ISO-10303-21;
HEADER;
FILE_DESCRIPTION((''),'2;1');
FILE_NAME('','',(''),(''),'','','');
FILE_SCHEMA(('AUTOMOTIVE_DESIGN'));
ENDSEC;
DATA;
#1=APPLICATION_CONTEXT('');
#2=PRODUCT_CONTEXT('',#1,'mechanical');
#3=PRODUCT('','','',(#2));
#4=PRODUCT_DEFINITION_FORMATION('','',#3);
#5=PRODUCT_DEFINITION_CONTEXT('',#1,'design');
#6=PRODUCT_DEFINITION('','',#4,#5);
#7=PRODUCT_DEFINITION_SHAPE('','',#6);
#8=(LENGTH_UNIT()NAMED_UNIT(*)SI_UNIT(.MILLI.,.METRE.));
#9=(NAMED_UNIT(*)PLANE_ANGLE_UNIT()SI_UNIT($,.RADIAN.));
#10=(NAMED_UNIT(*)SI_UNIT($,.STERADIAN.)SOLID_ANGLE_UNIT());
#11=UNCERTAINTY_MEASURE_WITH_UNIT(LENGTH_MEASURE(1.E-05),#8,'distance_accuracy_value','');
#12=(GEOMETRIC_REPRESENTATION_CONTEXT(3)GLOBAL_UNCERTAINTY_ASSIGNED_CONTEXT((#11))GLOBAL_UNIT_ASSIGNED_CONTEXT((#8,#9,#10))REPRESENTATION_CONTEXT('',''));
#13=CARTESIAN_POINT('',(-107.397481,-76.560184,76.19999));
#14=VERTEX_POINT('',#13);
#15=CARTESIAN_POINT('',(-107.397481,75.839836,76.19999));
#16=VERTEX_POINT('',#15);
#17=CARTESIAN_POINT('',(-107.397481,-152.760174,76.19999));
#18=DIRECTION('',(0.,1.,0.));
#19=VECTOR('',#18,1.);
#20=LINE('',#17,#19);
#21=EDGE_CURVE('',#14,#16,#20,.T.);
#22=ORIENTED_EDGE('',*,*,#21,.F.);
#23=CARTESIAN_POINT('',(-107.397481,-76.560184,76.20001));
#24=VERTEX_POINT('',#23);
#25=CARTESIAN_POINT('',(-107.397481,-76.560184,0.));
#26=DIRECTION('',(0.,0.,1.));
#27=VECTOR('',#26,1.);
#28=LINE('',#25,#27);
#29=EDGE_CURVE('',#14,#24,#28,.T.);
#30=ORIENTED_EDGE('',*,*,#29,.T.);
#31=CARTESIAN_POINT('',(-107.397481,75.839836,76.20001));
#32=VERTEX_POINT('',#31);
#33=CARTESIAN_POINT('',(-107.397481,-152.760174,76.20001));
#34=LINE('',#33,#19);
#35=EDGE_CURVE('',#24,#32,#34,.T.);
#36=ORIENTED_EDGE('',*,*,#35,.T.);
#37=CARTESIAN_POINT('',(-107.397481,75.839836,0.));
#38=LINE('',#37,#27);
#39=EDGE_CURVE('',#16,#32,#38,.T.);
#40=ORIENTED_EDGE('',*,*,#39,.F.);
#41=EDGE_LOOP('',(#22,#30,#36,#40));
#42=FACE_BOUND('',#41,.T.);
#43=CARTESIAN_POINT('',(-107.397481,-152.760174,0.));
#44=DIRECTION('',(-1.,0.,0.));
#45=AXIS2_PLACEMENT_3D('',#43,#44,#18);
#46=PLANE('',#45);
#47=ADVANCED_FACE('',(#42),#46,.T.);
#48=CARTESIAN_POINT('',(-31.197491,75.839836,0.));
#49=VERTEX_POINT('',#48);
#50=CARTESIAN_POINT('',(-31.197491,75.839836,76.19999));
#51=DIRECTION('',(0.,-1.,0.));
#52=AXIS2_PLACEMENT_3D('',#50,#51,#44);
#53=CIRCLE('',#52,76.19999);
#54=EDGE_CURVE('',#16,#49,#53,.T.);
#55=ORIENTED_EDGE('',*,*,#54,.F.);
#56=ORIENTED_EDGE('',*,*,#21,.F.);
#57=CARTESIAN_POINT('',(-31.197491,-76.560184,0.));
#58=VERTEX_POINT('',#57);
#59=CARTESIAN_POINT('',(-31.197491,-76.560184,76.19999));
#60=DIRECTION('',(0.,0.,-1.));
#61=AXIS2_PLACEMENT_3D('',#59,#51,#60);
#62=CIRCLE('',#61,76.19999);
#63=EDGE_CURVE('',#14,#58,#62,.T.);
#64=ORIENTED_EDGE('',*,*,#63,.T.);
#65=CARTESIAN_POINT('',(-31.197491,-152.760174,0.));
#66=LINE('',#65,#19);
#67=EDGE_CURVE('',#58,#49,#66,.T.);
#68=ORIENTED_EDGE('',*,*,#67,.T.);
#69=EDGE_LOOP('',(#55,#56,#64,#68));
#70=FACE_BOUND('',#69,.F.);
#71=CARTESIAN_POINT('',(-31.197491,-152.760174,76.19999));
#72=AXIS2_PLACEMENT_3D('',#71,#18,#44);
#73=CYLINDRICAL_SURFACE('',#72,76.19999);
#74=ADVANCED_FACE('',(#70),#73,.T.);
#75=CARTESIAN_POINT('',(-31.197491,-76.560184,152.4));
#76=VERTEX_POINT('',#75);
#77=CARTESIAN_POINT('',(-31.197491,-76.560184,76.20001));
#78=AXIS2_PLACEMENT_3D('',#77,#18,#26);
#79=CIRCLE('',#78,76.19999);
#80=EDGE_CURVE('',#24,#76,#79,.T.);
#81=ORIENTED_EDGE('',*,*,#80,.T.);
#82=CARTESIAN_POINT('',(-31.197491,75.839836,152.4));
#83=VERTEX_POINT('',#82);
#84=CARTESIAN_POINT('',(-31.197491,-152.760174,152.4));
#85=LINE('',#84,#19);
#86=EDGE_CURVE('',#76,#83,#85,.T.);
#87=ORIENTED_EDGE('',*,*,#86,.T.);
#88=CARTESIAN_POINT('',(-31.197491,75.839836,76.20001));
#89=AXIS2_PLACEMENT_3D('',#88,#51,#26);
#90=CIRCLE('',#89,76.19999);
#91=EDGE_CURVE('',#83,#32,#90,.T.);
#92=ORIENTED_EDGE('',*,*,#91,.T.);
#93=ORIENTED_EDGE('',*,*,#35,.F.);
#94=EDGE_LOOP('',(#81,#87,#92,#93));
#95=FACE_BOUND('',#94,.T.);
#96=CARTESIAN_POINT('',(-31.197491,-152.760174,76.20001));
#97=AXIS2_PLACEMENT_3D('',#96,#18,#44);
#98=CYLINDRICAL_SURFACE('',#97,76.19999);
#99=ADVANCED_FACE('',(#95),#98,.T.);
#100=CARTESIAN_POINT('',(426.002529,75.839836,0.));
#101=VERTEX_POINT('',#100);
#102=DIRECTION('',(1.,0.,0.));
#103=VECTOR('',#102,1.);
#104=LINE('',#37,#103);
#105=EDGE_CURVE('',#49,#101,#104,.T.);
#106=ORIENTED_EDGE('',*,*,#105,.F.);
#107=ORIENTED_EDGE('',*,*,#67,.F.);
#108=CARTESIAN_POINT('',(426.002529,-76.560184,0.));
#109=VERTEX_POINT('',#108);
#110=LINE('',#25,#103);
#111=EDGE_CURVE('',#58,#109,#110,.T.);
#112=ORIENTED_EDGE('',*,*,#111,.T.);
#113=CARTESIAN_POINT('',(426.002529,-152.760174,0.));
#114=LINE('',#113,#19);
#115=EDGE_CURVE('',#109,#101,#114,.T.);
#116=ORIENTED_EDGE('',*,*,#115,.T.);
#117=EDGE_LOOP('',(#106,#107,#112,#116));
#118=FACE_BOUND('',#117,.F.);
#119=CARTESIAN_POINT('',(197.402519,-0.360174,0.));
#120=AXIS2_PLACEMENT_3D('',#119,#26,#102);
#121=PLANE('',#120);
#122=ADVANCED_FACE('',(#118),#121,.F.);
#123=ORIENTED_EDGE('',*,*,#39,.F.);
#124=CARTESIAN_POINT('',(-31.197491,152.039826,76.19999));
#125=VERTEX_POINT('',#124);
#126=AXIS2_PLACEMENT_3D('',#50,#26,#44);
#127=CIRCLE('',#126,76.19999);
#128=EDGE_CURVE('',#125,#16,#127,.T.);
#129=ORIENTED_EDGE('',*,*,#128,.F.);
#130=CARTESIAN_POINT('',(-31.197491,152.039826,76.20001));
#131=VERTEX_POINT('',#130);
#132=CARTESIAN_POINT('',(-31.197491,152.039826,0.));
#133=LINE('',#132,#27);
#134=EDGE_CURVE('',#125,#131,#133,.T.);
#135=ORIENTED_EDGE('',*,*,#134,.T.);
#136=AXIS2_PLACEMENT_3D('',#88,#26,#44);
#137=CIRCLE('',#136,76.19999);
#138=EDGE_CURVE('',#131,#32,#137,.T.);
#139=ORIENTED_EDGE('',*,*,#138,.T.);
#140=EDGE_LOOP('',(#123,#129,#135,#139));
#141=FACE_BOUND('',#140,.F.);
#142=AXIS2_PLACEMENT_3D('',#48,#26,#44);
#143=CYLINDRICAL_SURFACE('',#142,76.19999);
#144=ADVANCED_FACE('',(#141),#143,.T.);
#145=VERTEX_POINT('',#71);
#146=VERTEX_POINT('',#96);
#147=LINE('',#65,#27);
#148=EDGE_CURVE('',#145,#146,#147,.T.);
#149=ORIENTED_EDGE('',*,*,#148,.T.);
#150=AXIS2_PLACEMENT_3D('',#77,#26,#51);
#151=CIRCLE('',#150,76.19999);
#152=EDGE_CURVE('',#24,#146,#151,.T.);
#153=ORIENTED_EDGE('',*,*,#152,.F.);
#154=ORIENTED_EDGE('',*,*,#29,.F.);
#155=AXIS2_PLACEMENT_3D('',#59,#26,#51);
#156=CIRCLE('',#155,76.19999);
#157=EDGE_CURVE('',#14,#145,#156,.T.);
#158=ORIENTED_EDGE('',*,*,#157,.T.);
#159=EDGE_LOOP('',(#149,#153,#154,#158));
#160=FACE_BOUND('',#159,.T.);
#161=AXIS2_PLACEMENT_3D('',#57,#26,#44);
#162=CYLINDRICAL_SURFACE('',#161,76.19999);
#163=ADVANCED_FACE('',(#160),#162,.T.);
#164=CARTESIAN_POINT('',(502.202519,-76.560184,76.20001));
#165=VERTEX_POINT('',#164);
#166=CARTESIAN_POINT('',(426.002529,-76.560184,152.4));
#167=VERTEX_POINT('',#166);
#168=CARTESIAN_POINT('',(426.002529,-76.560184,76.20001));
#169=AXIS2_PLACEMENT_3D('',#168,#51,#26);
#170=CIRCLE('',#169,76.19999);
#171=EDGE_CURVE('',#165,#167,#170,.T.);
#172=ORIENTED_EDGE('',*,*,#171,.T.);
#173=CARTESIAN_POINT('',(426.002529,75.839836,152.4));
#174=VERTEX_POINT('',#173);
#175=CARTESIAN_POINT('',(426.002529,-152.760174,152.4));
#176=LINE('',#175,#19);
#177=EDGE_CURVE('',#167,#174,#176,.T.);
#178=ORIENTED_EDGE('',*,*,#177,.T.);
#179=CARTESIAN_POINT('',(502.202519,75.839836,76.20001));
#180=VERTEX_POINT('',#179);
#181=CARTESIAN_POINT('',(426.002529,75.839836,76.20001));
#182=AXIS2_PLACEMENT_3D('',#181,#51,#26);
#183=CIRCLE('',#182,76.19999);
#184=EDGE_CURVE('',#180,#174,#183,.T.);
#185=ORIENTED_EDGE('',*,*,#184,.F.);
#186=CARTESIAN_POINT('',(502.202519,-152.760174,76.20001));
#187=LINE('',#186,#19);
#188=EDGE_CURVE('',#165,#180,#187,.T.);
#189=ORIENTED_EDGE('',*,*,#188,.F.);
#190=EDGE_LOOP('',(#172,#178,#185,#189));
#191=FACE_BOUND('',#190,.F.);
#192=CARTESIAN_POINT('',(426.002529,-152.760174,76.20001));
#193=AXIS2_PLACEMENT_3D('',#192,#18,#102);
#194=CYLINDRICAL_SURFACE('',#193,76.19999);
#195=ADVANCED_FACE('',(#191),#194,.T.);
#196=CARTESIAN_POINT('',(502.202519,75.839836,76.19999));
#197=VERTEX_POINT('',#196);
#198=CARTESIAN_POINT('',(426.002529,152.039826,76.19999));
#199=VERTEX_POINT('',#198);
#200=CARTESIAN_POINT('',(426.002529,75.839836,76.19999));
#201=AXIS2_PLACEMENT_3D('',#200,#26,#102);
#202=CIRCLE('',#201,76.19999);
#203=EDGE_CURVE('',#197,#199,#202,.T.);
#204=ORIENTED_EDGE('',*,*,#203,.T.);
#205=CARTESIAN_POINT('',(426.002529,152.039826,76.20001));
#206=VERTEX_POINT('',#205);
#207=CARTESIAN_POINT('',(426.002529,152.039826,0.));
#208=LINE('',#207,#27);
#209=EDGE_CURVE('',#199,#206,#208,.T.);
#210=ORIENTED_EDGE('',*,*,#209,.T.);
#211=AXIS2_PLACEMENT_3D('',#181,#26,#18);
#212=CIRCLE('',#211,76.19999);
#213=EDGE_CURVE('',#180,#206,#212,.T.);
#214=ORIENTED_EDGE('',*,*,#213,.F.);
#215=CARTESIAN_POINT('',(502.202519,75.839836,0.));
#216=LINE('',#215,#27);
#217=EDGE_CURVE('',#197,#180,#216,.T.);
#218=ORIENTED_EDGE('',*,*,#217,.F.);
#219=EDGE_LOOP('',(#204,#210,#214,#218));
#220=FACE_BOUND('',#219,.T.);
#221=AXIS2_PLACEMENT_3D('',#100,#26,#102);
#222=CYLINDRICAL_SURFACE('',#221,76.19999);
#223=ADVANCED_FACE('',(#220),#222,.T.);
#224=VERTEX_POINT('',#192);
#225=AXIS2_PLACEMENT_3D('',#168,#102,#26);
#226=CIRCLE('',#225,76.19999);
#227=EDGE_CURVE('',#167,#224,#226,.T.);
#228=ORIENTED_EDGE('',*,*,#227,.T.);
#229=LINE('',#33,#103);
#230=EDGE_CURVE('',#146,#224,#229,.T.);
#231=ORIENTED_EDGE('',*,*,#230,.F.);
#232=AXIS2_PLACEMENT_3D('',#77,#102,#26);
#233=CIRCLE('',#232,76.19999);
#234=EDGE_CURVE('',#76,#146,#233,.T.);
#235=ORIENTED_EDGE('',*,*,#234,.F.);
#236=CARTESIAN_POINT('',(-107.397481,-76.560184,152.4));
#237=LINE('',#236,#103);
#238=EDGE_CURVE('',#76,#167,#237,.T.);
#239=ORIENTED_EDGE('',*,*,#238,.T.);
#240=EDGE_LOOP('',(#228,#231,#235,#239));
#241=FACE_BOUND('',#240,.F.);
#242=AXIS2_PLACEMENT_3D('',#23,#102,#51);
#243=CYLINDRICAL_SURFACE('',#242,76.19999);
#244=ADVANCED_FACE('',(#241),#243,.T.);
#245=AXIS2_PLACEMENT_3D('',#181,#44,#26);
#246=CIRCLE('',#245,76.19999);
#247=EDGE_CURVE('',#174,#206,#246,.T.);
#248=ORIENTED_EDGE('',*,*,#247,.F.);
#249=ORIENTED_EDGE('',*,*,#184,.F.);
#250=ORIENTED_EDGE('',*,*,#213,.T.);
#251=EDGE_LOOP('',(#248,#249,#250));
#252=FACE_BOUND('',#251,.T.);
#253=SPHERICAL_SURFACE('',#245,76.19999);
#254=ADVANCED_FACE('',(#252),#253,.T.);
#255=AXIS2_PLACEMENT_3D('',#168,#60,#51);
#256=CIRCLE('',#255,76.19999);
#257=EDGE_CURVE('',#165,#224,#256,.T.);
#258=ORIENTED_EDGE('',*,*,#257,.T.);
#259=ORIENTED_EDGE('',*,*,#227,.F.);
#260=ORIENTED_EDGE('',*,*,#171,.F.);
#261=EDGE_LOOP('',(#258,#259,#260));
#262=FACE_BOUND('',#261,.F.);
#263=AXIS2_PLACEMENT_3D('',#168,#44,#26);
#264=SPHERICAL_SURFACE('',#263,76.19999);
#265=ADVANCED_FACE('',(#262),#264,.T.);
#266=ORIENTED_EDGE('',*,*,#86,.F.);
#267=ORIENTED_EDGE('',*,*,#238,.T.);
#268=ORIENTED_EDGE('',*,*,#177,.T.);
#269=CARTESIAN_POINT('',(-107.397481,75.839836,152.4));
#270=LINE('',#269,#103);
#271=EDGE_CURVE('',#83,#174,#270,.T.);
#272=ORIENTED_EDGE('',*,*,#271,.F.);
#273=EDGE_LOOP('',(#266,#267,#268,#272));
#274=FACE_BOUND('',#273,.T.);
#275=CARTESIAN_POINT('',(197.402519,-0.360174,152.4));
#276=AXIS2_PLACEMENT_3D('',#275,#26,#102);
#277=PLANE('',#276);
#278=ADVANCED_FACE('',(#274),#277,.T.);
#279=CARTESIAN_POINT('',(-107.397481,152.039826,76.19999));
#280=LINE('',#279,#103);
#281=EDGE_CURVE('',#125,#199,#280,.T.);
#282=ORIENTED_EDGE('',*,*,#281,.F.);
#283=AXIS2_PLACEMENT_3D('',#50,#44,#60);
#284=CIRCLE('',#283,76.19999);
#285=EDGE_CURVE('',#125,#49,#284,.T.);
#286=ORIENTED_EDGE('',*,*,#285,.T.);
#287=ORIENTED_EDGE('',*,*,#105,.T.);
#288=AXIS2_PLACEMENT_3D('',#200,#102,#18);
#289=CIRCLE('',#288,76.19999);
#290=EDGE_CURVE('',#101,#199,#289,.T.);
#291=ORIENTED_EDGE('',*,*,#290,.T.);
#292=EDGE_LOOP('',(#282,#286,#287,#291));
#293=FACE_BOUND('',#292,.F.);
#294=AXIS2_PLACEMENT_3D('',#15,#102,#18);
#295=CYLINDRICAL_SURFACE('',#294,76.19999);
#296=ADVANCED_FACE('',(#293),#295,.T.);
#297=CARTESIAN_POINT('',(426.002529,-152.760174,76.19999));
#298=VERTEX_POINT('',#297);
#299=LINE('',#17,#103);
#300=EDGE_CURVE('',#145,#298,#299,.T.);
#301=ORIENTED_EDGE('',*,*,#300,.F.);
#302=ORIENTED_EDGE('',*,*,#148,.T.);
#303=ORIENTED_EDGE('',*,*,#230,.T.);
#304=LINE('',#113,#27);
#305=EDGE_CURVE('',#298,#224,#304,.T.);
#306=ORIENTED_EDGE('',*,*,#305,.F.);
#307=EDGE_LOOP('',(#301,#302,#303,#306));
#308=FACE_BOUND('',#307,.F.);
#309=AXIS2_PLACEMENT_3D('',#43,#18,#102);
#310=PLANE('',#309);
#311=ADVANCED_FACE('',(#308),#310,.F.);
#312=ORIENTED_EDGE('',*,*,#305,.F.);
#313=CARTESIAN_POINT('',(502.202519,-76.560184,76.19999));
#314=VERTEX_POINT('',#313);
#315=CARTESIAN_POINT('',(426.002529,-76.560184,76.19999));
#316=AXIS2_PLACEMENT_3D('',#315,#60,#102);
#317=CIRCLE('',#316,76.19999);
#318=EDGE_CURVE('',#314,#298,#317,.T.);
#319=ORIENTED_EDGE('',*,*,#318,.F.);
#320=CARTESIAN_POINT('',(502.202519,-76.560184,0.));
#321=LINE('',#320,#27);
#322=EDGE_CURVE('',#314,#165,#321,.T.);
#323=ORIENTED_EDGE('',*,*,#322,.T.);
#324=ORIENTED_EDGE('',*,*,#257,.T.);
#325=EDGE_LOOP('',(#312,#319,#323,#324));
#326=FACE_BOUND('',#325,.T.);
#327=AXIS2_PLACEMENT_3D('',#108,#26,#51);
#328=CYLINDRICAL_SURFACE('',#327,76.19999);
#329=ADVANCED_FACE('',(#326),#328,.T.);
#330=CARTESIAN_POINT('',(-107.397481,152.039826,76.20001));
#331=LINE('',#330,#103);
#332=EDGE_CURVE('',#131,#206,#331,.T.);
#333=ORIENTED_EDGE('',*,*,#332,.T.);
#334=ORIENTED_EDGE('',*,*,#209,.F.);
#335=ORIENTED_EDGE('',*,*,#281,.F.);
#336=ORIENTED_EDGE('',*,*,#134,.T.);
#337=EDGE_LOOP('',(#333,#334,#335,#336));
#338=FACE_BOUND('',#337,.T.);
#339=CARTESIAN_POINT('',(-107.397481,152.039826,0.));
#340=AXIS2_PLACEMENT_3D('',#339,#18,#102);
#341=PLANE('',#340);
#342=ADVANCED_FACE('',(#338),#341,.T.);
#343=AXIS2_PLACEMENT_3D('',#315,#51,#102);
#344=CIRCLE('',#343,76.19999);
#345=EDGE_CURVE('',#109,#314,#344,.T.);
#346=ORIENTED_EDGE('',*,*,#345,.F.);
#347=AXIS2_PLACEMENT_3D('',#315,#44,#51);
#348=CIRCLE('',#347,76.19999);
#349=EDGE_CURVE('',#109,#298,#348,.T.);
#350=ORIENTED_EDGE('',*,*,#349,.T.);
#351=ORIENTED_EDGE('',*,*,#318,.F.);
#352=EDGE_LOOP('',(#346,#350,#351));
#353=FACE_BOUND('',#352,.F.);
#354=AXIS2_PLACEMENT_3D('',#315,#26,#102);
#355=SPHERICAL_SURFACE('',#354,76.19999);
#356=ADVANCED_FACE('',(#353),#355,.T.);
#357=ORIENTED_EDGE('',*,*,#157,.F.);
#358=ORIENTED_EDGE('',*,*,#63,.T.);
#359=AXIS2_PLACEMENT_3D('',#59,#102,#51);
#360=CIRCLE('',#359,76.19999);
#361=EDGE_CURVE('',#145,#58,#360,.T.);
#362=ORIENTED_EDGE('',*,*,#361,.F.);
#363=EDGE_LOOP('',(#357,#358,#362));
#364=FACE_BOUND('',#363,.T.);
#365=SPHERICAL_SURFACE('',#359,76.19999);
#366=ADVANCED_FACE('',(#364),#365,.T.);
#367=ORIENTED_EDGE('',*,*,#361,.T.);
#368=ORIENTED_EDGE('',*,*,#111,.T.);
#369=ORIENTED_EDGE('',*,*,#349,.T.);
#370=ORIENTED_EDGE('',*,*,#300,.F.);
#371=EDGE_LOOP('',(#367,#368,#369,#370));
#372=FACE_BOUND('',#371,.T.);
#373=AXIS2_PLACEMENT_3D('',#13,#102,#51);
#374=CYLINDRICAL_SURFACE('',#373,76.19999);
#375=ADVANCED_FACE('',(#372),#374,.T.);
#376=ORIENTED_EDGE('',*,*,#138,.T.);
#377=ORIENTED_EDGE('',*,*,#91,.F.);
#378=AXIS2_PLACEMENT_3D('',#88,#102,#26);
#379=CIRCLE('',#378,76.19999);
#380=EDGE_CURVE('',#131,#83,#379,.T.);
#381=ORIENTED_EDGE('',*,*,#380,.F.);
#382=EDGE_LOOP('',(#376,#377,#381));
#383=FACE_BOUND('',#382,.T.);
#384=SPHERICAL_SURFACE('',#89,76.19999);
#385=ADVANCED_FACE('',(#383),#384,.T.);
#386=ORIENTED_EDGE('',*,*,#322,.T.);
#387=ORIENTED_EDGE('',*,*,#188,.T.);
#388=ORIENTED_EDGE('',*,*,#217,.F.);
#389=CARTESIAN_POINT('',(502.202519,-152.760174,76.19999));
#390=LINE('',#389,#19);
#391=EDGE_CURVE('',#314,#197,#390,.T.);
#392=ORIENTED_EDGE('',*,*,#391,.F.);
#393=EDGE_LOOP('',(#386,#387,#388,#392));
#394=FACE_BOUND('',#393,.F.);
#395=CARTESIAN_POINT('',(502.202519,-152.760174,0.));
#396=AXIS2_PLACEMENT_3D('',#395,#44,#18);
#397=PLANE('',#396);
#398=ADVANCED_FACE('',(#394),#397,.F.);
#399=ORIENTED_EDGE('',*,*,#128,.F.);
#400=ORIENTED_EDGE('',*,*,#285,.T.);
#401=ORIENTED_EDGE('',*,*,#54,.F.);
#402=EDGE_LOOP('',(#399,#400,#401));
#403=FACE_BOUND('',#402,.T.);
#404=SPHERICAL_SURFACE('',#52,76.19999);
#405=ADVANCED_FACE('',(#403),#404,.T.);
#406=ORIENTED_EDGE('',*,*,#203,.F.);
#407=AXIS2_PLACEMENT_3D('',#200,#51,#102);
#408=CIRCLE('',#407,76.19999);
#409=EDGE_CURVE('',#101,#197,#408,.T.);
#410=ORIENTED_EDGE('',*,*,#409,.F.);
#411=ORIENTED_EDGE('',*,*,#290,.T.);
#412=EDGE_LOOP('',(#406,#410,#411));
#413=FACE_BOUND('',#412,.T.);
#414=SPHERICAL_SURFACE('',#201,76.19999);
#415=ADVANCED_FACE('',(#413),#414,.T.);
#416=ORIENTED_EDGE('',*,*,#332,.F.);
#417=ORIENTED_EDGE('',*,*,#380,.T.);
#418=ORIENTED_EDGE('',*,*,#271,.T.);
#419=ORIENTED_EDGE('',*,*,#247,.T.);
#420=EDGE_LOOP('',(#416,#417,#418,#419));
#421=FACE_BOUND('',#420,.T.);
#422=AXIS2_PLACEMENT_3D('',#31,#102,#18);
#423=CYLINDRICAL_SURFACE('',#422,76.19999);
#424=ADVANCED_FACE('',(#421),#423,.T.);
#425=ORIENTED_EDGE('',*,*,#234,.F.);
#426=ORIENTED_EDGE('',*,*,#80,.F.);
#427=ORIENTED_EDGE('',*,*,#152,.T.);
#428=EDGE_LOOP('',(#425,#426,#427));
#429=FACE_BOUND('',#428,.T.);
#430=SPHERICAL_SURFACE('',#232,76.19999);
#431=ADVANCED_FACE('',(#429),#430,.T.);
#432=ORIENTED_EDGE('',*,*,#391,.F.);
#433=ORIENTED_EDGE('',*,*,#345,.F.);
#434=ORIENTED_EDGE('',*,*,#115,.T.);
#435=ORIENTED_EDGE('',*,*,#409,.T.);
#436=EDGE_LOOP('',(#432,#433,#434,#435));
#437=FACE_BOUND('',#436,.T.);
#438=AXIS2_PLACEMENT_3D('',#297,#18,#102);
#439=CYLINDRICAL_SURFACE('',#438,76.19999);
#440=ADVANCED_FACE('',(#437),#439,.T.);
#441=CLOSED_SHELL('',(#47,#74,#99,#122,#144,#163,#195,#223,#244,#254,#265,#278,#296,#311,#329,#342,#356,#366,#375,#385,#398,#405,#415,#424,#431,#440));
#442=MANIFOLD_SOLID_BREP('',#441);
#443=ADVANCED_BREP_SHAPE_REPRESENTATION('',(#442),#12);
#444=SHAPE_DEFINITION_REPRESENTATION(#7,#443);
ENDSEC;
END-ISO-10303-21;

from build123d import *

# Parameters (mm, degrees)
F0_W     = 609.6
F0_H     = 304.8
F1_DEPTH = 152.4
F2_R     = 76.19999


# Not quite as in the source:
# - a fillet or chamfer is up to 0.001 mm smaller than in the source, because OpenCascade refuses the exact size


with BuildPart() as f1:
    # F0 (on Top) → F1 (new body)
    with BuildSketch(Plane.XY):
        with Locations((197.4025189088, -0.3601741046)):
            Rectangle(F0_W, F0_H)
    extrude(amount=F1_DEPTH)

    # F2 (radius 76.2 in the source; OpenCascade refuses exactly that, so slightly less here)
    f2_edges = [f1.edges().sort_by_distance(p)[0] for p in [
        (197.402519, -152.760174, 152.4),
        (-107.397481, -0.360174, 152.4),
        (197.402519, 152.039826, 152.4),
        (502.202519, -0.360174, 152.4),
        (502.202519, -152.760174, 76.2),
        (502.202519, 152.039826, 76.2),
        (502.202519, -0.360174, 0),
        (197.402519, -152.760174, 0),
        (-107.397481, -152.760174, 76.2),
        (-107.397481, -0.360174, 0),
        (-107.397481, 152.039826, 76.2),
        (197.402519, 152.039826, 0),
    ]]
    fillet(f2_edges, radius=F2_R)


solid = f1.part
